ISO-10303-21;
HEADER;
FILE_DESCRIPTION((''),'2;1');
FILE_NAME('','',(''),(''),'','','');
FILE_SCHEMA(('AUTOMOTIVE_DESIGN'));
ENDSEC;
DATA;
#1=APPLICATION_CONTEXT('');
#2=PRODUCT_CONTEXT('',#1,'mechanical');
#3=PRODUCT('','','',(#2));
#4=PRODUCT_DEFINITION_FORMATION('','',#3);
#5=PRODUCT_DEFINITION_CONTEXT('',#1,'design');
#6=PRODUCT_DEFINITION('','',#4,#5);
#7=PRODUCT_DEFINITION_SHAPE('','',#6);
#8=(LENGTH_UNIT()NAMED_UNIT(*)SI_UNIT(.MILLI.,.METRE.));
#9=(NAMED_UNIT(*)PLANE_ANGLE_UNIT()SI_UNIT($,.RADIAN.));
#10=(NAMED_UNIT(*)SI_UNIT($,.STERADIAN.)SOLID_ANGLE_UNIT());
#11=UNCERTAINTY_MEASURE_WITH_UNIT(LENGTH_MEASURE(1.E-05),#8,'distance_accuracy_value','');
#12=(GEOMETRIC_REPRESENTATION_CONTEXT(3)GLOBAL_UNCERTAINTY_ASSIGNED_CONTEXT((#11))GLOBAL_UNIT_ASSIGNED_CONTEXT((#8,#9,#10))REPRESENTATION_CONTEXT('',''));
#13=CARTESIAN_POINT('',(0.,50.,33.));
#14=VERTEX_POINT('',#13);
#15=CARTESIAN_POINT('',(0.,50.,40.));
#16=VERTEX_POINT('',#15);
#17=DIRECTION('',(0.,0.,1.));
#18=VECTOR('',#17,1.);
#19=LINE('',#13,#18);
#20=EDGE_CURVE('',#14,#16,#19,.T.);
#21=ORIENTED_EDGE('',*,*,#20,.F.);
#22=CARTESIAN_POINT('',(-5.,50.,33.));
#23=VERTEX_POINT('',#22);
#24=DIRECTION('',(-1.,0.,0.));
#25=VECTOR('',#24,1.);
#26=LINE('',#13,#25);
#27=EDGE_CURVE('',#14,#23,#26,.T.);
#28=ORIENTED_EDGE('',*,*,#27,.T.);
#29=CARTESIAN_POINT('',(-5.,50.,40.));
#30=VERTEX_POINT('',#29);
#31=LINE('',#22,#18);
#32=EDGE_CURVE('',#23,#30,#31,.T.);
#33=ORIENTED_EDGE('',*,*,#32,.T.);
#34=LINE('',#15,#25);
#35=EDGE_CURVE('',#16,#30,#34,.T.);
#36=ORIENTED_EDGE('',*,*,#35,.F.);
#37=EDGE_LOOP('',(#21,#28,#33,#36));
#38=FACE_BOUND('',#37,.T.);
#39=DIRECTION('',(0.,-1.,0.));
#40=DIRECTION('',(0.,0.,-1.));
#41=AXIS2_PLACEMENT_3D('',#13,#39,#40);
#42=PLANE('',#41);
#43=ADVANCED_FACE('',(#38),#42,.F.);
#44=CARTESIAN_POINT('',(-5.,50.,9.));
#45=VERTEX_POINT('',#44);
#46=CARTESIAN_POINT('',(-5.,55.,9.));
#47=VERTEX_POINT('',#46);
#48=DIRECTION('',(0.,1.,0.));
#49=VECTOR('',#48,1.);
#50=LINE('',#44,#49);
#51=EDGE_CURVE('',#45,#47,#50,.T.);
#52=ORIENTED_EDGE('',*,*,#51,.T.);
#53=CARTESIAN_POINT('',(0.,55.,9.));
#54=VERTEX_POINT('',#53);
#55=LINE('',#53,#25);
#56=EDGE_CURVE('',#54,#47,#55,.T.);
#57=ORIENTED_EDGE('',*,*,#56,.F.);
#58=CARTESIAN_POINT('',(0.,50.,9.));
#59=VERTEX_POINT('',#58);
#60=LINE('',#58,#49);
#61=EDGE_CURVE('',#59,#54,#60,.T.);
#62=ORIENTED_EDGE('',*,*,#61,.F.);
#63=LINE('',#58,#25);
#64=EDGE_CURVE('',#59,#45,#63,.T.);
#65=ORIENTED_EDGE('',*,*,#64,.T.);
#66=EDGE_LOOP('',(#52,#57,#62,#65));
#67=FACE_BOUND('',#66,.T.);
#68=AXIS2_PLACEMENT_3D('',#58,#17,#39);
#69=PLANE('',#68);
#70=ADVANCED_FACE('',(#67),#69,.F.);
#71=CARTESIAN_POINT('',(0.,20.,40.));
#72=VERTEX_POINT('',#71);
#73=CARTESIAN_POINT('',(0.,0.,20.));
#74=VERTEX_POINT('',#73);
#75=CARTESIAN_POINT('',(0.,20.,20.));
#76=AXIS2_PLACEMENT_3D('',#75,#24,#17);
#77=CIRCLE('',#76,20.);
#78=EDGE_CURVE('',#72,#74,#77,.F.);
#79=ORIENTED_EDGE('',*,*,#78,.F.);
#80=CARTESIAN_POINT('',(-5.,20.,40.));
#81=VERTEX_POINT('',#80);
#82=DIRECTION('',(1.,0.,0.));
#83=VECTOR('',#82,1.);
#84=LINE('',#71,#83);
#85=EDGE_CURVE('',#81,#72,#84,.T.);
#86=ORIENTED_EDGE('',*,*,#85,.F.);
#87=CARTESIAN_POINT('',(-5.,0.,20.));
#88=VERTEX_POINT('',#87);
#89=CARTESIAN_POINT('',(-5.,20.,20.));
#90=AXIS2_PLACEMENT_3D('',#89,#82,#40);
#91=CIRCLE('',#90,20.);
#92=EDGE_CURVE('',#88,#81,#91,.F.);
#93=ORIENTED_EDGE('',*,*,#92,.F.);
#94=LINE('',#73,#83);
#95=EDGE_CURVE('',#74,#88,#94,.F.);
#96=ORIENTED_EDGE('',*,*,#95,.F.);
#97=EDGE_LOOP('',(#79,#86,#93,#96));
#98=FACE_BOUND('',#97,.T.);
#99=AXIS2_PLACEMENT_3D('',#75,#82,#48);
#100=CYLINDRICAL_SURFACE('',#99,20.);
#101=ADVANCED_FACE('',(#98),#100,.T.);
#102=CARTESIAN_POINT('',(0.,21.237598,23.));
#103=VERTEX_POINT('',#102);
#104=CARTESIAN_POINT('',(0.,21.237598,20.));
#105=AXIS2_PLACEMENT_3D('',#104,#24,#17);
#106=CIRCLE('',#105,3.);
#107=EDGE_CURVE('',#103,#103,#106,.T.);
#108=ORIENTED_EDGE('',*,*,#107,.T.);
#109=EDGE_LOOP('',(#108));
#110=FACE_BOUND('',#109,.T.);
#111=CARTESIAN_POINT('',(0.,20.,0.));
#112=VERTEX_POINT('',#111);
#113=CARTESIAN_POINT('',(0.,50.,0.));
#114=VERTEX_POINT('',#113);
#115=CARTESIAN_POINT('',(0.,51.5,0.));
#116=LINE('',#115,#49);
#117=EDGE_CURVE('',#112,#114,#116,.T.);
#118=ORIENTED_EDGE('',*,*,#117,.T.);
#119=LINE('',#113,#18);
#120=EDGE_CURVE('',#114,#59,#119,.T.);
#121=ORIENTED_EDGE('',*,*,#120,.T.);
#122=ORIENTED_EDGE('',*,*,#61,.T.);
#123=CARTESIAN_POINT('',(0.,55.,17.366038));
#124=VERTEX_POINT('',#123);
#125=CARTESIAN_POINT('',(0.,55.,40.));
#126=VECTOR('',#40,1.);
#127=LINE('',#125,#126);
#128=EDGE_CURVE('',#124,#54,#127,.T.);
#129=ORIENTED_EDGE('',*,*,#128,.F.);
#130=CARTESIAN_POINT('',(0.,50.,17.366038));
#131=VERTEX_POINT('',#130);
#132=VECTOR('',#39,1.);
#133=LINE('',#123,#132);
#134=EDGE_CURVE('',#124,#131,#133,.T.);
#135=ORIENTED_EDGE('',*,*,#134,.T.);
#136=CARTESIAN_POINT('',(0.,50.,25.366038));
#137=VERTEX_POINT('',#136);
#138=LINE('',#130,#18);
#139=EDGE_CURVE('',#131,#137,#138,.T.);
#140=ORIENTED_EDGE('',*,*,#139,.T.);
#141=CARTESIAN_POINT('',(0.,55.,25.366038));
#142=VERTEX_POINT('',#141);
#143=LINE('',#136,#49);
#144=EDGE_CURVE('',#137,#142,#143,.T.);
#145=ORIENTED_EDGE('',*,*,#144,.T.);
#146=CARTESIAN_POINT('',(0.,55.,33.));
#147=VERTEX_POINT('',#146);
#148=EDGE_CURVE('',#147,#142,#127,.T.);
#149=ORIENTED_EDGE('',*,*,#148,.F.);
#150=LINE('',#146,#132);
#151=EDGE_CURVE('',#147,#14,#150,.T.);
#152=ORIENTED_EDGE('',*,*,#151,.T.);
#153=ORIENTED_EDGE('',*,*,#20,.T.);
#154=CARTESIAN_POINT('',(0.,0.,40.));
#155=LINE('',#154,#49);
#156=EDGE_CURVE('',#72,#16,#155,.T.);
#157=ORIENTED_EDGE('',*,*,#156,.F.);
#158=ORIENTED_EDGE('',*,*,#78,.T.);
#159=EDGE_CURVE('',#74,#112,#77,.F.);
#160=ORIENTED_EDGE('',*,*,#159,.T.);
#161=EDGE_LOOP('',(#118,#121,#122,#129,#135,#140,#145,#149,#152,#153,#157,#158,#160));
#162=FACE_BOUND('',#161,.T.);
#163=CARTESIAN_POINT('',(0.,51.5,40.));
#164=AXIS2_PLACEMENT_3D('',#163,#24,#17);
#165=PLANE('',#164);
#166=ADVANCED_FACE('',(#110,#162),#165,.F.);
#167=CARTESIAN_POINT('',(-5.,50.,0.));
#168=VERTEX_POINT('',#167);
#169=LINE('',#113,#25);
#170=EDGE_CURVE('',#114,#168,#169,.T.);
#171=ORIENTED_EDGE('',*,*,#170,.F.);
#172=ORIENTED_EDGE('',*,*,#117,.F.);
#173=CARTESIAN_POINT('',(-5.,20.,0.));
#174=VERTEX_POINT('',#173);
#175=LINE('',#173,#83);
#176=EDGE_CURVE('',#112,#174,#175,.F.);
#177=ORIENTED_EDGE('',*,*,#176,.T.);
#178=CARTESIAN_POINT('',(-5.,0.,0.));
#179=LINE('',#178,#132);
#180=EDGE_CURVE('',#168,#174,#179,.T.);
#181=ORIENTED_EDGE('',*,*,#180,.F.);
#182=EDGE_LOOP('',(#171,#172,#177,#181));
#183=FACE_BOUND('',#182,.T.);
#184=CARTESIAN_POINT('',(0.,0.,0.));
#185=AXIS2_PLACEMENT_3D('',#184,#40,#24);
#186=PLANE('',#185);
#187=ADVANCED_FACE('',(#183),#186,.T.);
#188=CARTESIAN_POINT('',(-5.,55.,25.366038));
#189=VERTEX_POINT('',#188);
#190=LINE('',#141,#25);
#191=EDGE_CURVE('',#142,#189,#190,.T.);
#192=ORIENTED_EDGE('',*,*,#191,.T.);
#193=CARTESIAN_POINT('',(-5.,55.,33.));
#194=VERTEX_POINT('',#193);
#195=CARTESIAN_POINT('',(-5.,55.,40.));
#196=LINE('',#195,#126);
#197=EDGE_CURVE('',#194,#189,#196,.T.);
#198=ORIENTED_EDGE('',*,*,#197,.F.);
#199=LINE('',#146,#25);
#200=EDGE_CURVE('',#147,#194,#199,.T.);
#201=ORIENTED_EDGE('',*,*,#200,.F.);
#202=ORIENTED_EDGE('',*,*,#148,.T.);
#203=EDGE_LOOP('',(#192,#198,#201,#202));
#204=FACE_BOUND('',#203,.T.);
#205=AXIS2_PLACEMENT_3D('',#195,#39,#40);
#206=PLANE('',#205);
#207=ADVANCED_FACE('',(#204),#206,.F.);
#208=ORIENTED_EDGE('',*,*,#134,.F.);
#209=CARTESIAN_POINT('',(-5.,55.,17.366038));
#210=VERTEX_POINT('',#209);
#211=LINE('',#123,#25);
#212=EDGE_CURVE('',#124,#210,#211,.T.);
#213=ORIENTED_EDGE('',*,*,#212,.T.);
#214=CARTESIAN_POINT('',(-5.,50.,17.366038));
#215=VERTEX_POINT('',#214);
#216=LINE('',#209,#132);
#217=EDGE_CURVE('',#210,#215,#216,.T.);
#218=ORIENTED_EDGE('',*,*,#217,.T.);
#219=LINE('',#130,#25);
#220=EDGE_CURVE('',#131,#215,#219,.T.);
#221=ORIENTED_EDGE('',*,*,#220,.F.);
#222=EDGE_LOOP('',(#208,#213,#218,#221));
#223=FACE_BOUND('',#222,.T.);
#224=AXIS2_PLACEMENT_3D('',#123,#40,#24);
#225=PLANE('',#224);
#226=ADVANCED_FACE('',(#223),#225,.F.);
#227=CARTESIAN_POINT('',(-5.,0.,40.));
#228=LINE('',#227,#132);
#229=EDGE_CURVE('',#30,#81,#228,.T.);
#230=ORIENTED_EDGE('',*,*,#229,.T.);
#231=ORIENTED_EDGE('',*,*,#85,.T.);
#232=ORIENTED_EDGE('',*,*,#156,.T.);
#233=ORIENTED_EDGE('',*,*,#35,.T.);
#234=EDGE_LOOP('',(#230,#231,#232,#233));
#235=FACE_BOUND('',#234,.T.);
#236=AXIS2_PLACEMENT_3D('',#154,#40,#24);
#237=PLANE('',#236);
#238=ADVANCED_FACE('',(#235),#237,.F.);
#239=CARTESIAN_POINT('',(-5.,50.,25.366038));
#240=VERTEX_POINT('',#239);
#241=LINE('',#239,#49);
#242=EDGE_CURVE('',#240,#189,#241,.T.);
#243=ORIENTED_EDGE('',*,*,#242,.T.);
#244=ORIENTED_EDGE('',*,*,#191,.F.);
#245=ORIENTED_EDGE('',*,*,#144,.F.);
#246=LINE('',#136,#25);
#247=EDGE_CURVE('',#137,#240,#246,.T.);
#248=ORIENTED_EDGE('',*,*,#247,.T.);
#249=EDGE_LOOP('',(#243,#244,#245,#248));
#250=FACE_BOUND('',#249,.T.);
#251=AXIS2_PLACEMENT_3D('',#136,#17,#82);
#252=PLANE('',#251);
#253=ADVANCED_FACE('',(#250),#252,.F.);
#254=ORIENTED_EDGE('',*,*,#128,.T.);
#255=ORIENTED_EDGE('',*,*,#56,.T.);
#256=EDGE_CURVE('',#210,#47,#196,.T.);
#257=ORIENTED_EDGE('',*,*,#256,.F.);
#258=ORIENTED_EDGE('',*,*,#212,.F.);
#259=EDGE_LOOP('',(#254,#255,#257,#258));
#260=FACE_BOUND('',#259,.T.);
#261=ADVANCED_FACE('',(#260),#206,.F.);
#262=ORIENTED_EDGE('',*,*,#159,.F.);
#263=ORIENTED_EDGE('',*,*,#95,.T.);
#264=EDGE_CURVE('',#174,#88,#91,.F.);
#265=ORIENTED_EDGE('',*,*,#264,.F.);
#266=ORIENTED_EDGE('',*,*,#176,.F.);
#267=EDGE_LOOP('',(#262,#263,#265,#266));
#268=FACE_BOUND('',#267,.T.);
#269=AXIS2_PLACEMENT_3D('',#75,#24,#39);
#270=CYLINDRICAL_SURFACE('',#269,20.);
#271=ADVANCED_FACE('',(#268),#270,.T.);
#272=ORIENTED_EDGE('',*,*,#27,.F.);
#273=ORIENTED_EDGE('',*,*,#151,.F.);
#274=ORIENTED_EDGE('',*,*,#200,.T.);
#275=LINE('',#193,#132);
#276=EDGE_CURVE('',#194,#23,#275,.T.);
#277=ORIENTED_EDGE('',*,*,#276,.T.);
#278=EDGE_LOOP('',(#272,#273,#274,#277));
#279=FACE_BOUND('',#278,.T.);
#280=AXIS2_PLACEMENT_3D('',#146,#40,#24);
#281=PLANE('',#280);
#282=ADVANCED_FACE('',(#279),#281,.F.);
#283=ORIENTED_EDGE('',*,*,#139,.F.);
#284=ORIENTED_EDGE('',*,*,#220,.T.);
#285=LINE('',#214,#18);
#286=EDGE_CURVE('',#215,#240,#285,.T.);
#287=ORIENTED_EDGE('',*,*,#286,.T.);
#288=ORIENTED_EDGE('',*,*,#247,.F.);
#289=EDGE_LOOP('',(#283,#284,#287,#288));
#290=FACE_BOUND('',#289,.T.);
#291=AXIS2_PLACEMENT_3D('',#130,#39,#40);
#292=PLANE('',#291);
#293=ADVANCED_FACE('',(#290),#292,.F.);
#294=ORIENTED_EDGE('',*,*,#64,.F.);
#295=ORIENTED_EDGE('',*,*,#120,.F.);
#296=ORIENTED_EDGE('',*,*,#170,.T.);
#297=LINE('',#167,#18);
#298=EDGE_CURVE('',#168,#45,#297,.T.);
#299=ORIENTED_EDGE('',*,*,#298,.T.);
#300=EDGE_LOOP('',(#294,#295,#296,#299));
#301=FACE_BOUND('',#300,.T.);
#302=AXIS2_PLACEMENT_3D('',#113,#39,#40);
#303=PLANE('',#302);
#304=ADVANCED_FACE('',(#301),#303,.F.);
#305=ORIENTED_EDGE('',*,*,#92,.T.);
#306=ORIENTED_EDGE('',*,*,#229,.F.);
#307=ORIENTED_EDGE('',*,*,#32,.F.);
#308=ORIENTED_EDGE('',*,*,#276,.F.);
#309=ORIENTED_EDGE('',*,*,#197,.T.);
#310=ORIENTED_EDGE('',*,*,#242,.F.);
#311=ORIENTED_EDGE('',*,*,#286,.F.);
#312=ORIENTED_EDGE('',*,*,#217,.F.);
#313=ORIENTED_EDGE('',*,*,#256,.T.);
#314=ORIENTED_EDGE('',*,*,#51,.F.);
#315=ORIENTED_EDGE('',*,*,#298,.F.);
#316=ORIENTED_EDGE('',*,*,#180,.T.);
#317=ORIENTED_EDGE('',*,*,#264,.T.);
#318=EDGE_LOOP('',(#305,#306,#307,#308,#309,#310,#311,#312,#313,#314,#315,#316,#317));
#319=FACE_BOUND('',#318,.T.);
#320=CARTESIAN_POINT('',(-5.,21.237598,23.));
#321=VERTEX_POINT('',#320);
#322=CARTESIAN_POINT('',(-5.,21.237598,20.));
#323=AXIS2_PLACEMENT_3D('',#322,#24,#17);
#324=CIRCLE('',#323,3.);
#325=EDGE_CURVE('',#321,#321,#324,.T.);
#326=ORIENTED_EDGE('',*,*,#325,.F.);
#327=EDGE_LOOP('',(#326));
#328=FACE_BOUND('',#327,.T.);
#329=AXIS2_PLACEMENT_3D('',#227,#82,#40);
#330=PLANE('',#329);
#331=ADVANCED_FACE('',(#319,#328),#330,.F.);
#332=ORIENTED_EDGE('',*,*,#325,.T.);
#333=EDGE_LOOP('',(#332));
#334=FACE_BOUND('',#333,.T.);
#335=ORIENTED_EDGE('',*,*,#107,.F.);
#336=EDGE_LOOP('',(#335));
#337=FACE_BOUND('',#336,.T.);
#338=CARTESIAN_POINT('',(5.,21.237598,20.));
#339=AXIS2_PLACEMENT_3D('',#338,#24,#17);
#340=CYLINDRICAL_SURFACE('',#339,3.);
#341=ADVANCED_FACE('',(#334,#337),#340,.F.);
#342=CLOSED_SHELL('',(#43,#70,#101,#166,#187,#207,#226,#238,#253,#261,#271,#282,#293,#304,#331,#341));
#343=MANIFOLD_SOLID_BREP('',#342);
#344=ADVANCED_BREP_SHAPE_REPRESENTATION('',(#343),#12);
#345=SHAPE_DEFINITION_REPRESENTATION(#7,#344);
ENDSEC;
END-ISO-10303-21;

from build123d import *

# Parameters (mm, degrees)
DODANIE_WYCI_GNI_CIE1_DEPTH = 40
ZAOKR_GLENIE1_R             = 20
SZKIC6_R                    = 3
WYTNIJ_WYCI_GNI_CIE1_DEPTH  = 10
WYTNIJ_WYCI_GNI_CIE2_DEPTH  = 69.190908485


with BuildPart() as part:
    # Szkic1 → Dodanie-wyciągnięcie1 (new body)
    with BuildSketch(Plane.XY):
        Polygon((0, 0), (-5, 0), (-5, 55), (0, 55), (0, 51.5), align=None)
    extrude(amount=DODANIE_WYCI_GNI_CIE1_DEPTH)

    # Zaokrąglenie1
    zaokr_glenie1_edges = [part.edges().sort_by_distance(p)[0] for p in [
        (-2.5, 0, 0),
        (-2.5, 0, 40),
    ]]
    fillet(zaokr_glenie1_edges, radius=ZAOKR_GLENIE1_R - 0.0001)  # a hair under: the kernel refuses the full size

    # Szkic6 → Wytnij-wyciągnięcie1 (cut)
    with BuildSketch(Plane.ZY.offset(5)):
        with Locations((20, 21.237598079)):
            Circle(SZKIC6_R)
    extrude(amount=-WYTNIJ_WYCI_GNI_CIE1_DEPTH, mode=Mode.SUBTRACT)

    # Szkic8 → Wytnij-wyciągnięcie2 (cut, through all)
    with BuildSketch(Plane.ZY.offset(5)):
        Polygon((0, 50), (9, 50), (9, 55), (17.366037593, 55), (17.366037593, 50), (25.366037593, 50), (25.366037593, 55), (33, 55), (33, 50), (40, 50), (40, 57.074314744), (0, 57.074314744), align=None)
    extrude(amount=-WYTNIJ_WYCI_GNI_CIE2_DEPTH, mode=Mode.SUBTRACT)


solid = part.part
